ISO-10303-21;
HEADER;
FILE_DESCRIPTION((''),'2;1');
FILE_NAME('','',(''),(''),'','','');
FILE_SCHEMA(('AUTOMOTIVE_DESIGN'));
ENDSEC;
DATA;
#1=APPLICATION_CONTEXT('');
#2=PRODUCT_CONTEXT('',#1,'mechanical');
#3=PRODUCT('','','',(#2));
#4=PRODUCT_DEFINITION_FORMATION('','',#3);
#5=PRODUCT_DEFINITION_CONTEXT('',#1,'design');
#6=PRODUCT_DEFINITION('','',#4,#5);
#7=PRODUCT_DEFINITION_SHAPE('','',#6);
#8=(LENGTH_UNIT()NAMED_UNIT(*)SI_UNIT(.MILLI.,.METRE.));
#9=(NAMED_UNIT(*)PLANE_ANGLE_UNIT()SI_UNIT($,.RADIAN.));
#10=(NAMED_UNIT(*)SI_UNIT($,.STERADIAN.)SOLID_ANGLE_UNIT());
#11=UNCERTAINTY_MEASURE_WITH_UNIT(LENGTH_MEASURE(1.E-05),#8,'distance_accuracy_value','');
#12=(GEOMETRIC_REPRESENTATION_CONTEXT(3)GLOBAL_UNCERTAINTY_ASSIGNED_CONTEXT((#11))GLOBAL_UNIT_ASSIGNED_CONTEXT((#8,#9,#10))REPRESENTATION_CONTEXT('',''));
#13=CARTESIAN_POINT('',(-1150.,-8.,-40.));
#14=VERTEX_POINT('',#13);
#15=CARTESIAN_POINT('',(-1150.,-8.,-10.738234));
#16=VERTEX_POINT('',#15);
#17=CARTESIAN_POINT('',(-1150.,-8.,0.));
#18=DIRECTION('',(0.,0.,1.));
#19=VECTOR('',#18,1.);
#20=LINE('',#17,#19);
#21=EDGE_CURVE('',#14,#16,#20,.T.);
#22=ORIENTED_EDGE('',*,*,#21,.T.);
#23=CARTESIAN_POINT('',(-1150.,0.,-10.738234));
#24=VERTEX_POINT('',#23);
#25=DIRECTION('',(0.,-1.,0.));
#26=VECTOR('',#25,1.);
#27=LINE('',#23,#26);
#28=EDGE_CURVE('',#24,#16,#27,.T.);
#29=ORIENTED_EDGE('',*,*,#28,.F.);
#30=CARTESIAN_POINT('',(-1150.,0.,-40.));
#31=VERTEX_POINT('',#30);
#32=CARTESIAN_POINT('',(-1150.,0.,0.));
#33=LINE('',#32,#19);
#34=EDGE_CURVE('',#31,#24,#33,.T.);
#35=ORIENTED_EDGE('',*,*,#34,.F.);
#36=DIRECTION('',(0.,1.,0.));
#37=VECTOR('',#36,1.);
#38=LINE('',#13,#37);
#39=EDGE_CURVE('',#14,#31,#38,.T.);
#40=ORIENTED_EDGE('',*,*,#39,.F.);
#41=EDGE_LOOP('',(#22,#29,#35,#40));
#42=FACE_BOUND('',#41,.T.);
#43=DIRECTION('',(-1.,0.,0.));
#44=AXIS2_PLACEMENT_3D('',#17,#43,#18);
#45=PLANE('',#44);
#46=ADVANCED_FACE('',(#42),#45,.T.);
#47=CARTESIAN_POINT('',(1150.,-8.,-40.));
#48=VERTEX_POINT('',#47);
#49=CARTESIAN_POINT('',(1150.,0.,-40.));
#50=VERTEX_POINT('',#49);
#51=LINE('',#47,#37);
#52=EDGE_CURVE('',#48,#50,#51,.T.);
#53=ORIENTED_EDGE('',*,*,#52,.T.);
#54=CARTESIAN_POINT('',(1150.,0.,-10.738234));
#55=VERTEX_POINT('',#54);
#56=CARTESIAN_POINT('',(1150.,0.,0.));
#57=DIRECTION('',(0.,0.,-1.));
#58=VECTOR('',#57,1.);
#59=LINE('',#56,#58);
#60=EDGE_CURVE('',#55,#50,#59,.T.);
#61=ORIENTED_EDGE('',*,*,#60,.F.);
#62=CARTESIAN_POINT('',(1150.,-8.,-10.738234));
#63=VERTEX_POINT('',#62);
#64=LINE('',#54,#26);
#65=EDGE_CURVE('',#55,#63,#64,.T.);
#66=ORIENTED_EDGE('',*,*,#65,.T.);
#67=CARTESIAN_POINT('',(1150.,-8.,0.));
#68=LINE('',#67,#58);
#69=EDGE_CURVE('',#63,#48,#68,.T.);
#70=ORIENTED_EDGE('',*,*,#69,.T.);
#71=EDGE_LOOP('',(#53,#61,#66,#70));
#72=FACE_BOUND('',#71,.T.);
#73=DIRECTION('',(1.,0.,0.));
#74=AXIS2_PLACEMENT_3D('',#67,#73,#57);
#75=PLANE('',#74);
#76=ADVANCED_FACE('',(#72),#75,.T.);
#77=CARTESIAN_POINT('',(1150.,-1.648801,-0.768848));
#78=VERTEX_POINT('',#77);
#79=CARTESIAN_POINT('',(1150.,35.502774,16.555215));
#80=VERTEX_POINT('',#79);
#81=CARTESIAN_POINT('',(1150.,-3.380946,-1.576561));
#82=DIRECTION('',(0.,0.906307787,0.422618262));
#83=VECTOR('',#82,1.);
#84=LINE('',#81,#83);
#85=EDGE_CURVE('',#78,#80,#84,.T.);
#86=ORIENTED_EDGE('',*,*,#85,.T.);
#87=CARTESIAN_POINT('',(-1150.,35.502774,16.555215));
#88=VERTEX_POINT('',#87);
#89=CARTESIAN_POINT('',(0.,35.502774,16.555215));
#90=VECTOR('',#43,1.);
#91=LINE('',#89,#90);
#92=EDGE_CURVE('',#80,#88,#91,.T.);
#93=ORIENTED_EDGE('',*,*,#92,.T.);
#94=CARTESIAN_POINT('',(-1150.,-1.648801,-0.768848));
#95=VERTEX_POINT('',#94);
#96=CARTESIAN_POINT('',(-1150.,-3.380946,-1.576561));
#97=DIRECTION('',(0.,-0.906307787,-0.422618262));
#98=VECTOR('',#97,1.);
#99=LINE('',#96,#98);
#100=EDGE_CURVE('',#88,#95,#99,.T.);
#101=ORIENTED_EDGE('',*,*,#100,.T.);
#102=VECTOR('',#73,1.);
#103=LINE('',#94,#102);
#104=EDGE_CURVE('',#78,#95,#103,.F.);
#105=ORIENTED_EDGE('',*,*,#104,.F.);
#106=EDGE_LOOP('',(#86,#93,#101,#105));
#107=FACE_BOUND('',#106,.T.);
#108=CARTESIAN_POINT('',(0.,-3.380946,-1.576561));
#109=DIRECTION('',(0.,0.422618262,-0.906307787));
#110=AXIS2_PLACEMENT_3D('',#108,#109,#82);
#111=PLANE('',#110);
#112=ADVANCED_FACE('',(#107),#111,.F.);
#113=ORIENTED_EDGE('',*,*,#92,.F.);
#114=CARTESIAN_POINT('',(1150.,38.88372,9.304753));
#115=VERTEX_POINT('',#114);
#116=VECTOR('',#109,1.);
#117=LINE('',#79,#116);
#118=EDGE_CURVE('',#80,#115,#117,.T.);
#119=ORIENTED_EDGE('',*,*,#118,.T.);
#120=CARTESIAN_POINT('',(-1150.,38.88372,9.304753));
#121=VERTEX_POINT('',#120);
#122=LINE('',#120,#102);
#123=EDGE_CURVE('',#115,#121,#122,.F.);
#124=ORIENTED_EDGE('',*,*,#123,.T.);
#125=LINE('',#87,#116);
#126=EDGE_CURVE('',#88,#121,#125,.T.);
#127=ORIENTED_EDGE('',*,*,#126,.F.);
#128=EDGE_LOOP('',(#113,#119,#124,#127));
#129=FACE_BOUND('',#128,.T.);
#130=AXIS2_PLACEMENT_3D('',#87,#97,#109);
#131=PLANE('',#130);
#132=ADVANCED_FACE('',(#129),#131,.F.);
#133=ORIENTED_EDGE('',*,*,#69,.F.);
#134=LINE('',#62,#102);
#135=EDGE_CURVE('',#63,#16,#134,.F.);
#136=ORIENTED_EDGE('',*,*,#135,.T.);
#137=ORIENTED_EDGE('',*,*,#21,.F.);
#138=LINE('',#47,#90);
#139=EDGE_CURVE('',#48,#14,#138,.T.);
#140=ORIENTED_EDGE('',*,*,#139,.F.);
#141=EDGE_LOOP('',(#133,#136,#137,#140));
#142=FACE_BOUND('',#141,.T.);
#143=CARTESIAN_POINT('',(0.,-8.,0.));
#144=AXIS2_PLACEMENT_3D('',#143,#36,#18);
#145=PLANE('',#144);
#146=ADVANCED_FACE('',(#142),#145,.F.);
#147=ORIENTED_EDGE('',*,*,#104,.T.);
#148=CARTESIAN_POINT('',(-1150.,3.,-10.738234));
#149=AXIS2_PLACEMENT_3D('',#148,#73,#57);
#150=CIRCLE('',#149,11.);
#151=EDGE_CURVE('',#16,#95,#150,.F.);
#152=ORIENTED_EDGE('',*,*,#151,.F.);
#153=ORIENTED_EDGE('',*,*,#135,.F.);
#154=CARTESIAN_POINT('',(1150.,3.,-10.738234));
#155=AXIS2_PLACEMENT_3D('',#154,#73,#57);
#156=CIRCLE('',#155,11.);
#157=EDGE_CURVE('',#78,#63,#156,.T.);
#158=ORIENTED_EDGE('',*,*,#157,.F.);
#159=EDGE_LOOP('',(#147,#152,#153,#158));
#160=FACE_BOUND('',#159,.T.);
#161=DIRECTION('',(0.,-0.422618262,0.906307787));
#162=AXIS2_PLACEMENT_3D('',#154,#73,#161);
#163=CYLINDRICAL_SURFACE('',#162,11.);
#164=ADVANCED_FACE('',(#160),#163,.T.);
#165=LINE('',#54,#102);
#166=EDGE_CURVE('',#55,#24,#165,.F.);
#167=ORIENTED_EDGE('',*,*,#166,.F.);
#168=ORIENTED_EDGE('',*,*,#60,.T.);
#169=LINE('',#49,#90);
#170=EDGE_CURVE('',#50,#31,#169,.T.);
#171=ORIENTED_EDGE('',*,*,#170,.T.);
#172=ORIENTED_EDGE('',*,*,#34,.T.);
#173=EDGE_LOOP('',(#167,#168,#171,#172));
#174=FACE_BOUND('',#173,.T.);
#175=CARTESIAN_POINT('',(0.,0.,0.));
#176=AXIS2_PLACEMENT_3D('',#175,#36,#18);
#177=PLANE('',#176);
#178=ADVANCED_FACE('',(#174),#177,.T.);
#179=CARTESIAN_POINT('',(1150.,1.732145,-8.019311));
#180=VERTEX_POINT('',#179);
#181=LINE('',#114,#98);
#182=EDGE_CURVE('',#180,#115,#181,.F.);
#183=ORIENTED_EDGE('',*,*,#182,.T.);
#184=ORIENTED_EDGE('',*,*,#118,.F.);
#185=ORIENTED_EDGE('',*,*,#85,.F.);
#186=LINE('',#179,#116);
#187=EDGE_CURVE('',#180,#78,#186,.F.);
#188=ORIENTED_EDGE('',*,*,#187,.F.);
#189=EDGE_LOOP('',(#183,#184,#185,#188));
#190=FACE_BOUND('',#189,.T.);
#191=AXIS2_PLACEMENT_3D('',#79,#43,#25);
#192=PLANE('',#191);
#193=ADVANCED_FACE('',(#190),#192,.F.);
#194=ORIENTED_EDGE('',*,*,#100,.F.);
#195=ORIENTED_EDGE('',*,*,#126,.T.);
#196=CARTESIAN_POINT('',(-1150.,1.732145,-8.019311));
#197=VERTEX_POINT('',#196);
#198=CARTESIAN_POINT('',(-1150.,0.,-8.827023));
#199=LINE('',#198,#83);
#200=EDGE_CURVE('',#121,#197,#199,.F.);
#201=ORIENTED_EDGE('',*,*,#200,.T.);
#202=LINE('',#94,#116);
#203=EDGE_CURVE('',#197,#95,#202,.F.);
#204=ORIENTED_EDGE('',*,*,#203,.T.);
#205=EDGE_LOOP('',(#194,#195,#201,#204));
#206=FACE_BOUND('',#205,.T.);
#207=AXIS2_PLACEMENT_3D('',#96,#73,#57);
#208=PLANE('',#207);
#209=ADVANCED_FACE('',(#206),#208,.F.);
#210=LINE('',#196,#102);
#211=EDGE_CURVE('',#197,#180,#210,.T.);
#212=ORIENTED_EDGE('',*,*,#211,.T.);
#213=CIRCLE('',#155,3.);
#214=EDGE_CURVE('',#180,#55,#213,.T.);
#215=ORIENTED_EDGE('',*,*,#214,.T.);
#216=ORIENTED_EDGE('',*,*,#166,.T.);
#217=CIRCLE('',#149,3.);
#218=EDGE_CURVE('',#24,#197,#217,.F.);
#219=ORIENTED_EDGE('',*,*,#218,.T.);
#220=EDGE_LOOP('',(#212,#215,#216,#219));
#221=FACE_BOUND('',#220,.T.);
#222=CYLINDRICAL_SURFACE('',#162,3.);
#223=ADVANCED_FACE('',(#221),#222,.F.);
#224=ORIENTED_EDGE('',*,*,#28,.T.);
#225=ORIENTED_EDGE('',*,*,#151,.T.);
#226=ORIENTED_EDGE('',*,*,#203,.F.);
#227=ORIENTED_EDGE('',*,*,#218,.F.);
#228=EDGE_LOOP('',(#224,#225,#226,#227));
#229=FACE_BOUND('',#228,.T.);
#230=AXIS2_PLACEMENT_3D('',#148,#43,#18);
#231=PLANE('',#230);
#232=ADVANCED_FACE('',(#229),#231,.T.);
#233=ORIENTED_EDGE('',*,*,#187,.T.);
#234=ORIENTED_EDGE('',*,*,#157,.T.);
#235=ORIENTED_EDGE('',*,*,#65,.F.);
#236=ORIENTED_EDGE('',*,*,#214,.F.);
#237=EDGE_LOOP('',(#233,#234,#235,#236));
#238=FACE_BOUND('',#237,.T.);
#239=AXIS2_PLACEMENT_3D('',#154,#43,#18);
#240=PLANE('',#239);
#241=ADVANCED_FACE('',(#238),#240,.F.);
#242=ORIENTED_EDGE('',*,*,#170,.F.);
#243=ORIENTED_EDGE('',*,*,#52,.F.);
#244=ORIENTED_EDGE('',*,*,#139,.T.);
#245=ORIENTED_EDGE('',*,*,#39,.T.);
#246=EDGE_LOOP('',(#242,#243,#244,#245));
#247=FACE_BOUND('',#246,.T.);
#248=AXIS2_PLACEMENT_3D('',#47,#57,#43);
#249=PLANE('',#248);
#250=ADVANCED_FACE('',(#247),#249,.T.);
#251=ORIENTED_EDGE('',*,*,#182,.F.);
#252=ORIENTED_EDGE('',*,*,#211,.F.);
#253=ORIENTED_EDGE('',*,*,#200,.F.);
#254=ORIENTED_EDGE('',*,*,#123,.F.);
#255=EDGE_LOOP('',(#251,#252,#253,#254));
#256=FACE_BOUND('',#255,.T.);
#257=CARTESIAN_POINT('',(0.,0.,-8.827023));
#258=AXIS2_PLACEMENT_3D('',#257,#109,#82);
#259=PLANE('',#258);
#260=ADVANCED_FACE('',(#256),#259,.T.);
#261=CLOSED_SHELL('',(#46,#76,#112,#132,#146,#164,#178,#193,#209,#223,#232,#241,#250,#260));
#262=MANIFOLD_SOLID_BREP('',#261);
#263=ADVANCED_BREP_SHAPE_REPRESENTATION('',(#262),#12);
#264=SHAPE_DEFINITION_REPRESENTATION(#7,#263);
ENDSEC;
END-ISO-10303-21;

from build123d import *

# Parameters (mm, degrees)
SKETCH2_W            = 2300
SKETCH2_H            = 40
BASE_FLANGE1_DEPTH   = 8
EDGE_FLANGE1_START   = -1150
EDGE_FLANGE1_DEPTH   = 2300
EDGE_FLANGE1_2_DEPTH = 2300


# Read off the part's stored shape, not the designer's step: Edge-Flange1
# Sheet-metal steps are written as plain solids
with BuildPart() as part:
    # Sketch2 → Base-Flange1 (new body)
    with BuildSketch(Plane(origin=(0, 0, 0), x_dir=(1, 0, 0), z_dir=(0, 1, 0))):
        with Locations((0, 20)):
            Rectangle(SKETCH2_W, SKETCH2_H)
    extrude(amount=-BASE_FLANGE1_DEPTH)

    # Edge-Flange1 outline → Edge-Flange1 (cut)
    with BuildSketch(Plane.YZ.offset(EDGE_FLANGE1_START)):
        with BuildLine():
            ThreePointArc((-8, -10.738234134), (-6.277305904, -4.827938442), (-1.648800879, -0.768848477))
            Line((-1.648800879, -0.768848477), (0, 0))
            Line((0, 0), (-8, 0))
            Line((-8, 0), (-8, -10.738234134))
        make_face()
    extrude(amount=EDGE_FLANGE1_DEPTH, mode=Mode.SUBTRACT)

    # Edge-Flange1 2 outline → Edge-Flange1 2 (add)
    with BuildSketch(Plane.YZ.offset(EDGE_FLANGE1_START)):
        with BuildLine():
            Line((35.502773778, 16.555215298), (0, 0))
            Line((0, 0), (0, -10.738234134))
            ThreePointArc((0, -10.738234134), (0.469825663, -9.126335309), (1.732145215, -8.019310773))
            Line((1.732145215, -8.019310773), (38.883719872, 9.304753002))
            Line((38.883719872, 9.304753002), (35.502773778, 16.555215298))
        make_face()
    extrude(amount=EDGE_FLANGE1_2_DEPTH)


solid = part.part
